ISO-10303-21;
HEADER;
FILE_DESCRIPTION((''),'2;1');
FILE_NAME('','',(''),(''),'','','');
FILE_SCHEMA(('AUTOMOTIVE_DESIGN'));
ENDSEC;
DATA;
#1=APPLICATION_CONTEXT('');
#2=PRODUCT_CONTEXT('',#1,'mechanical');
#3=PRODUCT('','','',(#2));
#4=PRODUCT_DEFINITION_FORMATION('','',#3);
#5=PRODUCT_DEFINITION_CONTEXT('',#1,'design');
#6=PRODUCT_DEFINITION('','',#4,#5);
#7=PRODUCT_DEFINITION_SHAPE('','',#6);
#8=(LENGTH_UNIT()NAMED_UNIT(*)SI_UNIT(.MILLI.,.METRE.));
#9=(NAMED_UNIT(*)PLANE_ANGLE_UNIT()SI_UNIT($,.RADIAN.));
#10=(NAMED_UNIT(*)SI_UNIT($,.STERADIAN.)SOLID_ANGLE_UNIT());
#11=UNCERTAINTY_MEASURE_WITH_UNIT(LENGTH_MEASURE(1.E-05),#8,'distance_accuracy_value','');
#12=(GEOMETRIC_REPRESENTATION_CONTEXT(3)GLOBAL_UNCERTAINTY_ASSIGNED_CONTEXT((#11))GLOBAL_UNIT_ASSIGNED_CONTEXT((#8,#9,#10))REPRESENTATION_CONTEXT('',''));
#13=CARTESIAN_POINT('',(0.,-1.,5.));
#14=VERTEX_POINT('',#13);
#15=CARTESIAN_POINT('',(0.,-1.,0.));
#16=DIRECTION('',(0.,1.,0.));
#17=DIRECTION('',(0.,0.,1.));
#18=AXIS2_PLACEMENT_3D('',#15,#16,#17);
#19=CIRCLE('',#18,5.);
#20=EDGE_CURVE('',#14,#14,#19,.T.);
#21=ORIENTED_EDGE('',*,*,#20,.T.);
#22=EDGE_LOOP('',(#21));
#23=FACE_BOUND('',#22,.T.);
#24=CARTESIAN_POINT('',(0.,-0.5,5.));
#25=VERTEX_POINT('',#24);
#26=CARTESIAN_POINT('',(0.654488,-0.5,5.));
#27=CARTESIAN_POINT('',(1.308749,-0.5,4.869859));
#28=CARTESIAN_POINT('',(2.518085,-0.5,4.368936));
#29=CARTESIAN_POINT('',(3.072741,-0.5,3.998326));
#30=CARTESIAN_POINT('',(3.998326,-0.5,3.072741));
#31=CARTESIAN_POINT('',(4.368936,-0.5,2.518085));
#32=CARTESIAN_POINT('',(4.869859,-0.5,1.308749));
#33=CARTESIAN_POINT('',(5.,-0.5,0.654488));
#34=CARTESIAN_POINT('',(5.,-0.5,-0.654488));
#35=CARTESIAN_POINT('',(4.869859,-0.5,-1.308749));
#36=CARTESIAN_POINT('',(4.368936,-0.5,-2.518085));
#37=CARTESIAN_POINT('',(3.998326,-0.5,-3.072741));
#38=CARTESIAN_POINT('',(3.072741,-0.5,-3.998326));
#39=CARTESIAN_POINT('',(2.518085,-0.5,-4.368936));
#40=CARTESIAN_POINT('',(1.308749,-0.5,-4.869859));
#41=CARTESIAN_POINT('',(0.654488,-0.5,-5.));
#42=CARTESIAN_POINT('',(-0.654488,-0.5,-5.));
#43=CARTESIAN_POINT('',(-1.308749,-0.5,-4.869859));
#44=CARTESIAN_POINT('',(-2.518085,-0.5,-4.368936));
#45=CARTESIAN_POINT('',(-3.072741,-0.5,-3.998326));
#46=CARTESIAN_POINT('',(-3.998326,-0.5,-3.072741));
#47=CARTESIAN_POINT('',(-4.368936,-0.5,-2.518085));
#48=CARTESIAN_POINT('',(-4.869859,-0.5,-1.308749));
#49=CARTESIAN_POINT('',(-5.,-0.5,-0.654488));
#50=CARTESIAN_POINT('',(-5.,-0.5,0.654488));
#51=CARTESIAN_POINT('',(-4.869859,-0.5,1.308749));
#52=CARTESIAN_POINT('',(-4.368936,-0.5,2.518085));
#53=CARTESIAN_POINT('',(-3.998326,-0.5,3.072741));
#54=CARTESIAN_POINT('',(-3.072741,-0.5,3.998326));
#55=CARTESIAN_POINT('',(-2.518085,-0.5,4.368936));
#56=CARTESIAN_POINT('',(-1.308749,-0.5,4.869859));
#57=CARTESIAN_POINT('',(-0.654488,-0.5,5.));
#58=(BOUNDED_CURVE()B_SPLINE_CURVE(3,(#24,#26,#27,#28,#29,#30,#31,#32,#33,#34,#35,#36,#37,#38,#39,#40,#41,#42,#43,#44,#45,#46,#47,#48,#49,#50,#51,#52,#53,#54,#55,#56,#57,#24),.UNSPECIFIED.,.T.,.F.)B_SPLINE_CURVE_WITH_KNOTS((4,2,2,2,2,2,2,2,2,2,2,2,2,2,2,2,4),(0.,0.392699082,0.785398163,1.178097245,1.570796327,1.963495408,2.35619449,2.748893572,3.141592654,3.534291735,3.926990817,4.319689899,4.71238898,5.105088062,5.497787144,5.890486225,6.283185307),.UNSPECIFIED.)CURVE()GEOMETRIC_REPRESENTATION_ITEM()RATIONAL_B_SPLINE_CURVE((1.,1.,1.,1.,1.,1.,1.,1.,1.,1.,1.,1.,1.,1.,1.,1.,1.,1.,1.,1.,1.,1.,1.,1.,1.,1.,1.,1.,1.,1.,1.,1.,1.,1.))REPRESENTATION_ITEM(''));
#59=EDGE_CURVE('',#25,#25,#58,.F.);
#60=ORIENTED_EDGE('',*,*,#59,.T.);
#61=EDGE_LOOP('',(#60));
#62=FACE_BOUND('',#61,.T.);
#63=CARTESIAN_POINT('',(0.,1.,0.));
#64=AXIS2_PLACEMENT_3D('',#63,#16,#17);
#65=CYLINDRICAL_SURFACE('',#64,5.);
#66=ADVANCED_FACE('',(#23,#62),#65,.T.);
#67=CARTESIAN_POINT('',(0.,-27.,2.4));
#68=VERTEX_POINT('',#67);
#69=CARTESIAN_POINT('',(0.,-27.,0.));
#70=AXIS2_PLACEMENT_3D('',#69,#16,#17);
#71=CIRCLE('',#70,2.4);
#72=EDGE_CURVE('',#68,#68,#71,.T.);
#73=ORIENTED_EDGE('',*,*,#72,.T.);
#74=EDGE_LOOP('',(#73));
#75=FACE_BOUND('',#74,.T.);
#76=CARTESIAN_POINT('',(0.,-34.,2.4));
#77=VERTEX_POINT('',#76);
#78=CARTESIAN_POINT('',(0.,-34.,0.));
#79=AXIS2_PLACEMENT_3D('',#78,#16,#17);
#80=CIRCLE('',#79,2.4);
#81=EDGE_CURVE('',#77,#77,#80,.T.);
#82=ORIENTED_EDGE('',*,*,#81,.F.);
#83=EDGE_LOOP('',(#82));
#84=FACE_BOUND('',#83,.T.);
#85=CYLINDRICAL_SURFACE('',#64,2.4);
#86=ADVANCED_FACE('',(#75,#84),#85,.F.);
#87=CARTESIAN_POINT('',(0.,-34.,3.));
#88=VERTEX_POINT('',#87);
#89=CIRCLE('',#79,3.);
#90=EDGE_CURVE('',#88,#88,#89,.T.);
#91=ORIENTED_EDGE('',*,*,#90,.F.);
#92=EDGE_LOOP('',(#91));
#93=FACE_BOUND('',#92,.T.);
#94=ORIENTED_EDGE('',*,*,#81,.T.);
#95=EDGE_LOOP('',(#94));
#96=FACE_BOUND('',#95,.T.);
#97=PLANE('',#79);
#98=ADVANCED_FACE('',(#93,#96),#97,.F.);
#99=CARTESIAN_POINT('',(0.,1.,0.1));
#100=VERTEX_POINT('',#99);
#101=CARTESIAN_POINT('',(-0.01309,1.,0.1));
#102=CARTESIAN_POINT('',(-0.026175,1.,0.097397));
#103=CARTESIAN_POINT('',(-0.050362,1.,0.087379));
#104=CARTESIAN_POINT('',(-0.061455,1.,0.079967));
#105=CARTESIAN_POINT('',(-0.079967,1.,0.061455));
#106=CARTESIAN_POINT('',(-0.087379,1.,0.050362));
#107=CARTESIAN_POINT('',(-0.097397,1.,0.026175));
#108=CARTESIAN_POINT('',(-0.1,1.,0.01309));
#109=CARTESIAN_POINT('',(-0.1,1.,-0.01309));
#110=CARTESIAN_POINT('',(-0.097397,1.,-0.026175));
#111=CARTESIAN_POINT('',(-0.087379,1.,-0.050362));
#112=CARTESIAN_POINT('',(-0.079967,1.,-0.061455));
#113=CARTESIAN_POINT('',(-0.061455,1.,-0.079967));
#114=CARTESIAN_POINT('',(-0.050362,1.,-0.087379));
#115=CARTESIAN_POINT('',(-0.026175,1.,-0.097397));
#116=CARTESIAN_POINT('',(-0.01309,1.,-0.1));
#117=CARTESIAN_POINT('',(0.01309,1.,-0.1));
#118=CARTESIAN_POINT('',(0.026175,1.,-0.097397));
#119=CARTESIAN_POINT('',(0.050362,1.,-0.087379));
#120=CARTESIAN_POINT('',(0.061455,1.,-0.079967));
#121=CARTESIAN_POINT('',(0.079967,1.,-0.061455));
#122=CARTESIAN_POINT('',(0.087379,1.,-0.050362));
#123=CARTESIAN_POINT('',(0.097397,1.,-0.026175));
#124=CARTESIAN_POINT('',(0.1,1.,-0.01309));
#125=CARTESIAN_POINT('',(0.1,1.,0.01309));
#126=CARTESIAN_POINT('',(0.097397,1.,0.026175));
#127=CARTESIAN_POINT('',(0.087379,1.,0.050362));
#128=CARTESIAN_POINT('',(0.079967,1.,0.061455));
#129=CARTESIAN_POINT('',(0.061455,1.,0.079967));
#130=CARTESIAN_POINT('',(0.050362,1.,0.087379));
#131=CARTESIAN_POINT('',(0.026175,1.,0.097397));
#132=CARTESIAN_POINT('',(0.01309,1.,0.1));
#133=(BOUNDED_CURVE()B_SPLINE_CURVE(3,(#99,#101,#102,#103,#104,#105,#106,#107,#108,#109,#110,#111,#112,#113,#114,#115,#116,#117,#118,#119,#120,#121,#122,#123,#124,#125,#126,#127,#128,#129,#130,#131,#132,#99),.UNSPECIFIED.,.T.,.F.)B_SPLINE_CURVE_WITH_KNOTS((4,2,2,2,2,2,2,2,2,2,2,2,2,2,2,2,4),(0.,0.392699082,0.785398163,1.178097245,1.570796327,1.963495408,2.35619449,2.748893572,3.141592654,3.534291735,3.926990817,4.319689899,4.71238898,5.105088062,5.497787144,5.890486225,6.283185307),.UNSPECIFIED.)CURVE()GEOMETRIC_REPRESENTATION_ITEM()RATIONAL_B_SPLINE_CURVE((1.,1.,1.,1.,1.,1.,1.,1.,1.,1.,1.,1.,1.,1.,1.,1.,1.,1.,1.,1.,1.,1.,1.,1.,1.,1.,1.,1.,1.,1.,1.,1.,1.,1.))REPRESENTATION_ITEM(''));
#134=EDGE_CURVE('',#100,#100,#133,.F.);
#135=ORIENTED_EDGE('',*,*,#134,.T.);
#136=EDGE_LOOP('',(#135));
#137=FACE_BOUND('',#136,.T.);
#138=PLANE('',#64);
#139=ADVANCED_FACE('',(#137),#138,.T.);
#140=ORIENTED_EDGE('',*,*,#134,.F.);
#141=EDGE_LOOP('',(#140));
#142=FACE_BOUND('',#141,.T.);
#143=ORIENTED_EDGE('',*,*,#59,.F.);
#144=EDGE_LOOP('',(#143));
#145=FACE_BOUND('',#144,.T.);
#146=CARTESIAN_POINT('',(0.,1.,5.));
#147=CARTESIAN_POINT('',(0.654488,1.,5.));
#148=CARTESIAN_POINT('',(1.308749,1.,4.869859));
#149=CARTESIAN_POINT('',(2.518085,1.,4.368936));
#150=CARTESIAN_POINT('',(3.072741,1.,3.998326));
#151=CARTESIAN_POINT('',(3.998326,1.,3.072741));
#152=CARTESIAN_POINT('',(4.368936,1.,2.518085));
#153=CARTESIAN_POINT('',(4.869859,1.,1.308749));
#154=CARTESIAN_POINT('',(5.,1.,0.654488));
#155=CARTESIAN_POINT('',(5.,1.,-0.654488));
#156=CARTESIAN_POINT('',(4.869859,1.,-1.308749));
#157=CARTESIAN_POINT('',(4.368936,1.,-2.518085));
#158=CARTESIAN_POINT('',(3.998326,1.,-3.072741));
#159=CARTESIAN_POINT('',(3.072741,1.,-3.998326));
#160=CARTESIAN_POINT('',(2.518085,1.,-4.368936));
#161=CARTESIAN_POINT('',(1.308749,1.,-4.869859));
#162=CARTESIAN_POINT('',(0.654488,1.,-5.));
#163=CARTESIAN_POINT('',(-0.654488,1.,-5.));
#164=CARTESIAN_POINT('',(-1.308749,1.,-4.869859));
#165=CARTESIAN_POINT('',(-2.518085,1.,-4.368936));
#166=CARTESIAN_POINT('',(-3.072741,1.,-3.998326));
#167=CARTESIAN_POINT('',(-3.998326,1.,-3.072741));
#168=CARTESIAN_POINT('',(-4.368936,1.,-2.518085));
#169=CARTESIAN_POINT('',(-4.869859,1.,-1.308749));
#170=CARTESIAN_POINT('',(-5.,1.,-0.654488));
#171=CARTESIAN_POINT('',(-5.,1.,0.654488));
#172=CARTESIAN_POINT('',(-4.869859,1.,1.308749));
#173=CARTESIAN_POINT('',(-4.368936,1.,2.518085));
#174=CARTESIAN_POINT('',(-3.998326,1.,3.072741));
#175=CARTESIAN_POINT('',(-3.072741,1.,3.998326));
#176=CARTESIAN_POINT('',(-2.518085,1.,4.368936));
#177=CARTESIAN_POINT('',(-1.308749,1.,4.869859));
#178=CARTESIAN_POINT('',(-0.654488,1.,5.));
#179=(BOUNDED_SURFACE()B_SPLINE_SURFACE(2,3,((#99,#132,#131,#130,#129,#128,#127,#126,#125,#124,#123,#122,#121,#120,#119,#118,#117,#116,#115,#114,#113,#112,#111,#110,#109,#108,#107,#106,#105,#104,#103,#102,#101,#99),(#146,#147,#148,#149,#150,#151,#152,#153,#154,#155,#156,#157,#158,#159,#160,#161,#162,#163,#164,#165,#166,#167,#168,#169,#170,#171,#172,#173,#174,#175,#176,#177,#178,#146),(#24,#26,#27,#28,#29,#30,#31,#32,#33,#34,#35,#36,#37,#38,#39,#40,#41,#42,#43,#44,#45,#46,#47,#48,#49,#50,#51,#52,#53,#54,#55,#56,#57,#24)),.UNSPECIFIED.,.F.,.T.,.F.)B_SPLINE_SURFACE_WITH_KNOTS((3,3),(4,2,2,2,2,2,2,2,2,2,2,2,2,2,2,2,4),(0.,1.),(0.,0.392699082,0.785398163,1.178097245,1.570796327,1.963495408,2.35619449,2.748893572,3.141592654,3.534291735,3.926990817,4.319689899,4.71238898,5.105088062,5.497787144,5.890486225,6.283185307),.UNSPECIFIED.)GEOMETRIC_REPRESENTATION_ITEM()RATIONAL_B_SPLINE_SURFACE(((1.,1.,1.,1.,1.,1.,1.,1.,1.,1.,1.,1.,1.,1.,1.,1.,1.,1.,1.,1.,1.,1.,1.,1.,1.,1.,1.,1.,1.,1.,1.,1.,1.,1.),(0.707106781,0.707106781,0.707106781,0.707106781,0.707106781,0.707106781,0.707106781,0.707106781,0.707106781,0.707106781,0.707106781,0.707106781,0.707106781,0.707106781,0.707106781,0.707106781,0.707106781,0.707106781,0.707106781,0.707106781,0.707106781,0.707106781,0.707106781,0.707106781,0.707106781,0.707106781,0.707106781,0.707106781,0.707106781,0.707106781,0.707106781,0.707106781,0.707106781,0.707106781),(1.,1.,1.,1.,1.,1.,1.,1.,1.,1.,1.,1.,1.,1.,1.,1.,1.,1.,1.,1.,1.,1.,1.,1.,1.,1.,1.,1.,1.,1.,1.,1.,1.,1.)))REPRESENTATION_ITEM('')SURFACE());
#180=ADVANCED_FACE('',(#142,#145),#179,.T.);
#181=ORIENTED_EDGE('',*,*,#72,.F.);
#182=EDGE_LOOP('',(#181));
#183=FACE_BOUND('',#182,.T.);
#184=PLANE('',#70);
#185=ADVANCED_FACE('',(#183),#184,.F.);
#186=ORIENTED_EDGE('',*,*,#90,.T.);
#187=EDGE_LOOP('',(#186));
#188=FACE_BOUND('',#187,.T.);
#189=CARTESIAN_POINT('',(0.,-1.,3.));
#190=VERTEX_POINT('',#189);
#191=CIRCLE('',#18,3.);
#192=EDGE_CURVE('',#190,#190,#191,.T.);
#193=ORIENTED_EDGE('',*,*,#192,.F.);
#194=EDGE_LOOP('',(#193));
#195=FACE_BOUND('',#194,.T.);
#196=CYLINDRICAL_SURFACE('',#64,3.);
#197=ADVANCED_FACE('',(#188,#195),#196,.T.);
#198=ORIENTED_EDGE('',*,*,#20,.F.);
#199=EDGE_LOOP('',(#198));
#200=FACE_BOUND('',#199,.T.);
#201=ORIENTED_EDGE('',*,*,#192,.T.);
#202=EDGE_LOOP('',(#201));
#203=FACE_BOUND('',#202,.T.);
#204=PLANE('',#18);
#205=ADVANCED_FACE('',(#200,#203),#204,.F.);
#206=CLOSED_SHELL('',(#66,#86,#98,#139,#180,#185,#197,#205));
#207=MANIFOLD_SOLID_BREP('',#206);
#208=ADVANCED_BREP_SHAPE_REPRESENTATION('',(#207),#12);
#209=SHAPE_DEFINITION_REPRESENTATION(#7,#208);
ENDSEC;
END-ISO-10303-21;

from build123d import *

# Parameters (mm, degrees)
FILLET1_SIZE   = 4.9
FILLET1_SIZE_2 = 1.5


with BuildPart() as part:
    # Sketch1 → Revolve1 (revolve)
    with BuildSketch(Plane(origin=(0, 0, 0), x_dir=(0, 0, -1), z_dir=(1, 0, 0)), mode=Mode.PRIVATE) as revolve1_sk:
        Polygon((3, -1), (0, -1), (0, -27), (2.4, -27), (2.4, -34), (3, -34), align=None)
        Polygon((5, 1), (0, 1), (0, -1), (3, -1), (5, -1), align=None)
    revolve(revolve1_sk.sketch.rotate(Axis((0, 1, 0), (0, -1, 0)), 180), axis=Axis((0, 1, 0), (0, -1, 0)))

    # Fillet1
    # an asymmetric fillet: 4.9, 1.5 mm, written as the material it takes off along each edge
    with BuildSketch(Plane(origin=(0, 1, 0), x_dir=(0, 0, 1), z_dir=(1, 0, 0))) as fillet1_piece_1:
        with BuildLine():
            Bezier((5 - FILLET1_SIZE, 0), (5, 0), (5, FILLET1_SIZE_2), weights=[1, 0.707106781, 1])
            Line((5, FILLET1_SIZE_2), (5, 0))
            Line((5, 0), (5 - FILLET1_SIZE, 0))
        make_face()
    revolve(axis=Axis((0, 1, 0), (0, -1, 0)), mode=Mode.SUBTRACT)


solid = part.part
